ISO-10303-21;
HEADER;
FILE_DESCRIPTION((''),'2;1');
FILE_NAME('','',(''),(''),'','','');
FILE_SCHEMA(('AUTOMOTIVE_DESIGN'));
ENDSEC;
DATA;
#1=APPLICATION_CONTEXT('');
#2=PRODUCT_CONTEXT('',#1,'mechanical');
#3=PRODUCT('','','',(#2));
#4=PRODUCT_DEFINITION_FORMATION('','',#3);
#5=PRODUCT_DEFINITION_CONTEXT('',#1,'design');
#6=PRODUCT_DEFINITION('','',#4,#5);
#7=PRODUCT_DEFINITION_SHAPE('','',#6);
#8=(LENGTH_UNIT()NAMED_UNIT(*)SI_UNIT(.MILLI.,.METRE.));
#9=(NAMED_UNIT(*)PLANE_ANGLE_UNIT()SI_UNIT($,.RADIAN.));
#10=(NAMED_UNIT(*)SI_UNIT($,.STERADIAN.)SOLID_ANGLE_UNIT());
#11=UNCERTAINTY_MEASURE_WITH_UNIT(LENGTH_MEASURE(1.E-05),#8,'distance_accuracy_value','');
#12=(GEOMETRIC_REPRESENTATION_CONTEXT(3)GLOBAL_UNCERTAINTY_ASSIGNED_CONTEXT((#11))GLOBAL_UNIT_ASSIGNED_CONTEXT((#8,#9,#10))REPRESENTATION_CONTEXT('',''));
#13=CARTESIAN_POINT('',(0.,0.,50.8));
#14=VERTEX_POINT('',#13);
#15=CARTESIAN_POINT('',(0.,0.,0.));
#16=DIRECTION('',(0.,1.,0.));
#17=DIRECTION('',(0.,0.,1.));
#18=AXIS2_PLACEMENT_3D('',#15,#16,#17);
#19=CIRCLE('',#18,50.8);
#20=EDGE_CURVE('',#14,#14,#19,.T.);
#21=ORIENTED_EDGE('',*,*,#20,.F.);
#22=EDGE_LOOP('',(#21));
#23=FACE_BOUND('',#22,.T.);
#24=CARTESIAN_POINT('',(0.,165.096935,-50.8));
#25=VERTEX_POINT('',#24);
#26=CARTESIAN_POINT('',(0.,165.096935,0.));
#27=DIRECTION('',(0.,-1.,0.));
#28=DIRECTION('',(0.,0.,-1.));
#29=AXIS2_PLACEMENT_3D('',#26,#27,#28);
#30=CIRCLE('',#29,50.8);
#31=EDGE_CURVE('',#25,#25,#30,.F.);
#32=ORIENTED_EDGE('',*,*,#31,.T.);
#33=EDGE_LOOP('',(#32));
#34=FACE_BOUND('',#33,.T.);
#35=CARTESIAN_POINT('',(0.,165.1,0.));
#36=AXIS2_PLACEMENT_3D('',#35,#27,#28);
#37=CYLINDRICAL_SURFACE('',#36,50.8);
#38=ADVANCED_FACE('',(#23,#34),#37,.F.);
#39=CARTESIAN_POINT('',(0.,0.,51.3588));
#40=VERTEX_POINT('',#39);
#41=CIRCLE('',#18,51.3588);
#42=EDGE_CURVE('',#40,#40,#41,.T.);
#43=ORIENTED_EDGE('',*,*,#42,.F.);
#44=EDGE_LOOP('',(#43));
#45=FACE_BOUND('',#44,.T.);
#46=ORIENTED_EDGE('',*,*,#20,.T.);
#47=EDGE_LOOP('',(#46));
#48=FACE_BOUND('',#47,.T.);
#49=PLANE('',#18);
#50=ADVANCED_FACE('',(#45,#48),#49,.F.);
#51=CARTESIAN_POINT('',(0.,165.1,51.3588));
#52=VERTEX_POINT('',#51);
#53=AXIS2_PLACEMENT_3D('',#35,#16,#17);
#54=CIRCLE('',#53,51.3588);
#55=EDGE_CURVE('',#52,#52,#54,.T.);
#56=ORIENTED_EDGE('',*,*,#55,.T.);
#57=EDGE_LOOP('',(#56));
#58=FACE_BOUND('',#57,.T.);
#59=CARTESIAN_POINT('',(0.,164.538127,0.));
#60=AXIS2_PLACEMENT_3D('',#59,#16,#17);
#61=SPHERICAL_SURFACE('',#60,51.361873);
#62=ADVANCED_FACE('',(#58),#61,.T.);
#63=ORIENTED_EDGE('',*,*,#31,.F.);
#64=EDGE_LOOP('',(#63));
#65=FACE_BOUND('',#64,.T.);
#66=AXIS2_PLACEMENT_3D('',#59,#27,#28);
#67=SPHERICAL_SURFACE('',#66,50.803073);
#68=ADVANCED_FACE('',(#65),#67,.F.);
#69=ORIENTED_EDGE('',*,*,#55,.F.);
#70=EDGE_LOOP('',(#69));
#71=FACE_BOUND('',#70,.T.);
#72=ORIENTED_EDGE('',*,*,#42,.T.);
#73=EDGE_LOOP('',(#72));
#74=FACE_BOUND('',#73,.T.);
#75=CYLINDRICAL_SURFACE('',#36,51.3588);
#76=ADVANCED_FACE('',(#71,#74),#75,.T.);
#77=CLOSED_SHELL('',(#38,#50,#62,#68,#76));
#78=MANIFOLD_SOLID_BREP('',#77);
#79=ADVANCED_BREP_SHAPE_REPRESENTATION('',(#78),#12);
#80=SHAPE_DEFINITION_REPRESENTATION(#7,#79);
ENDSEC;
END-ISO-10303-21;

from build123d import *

# Parameters (mm, degrees)
SKETCH1_R           = 51.3588
BOSS_EXTRUDE1_DEPTH = 165.1
DOME1_FACE_RADIUS   = 51.3588
DOME1_HEIGHT        = 50.8


# Read off the part's stored shape, not the designer's step: Shell1
with BuildPart() as part:
    # Sketch1 → Boss-Extrude1 (new body)
    with BuildSketch(Plane(origin=(0, 0, 0), x_dir=(1, 0, 0), z_dir=(0, 1, 0))):
        with Locations(Location((0, 0, 0), (0, 0, 270))):
            Circle(SKETCH1_R)
    extrude(amount=BOSS_EXTRUDE1_DEPTH)

    # Dome1: a dome of height H over a round flat face of radius A is a cap of a sphere of radius (A * A + H * H) / (2 * H)
    dome1_r = (DOME1_FACE_RADIUS * DOME1_FACE_RADIUS + DOME1_HEIGHT * DOME1_HEIGHT) / (2 * DOME1_HEIGHT)
    dome1_base = Plane((0, 165.1, 0), z_dir=(0, 1, 0))
    with Locations(dome1_base.offset(DOME1_HEIGHT - dome1_r)):
        dome1_ball = Sphere(dome1_r, mode=Mode.PRIVATE)
    add(split(dome1_ball, bisect_by=dome1_base, keep=Keep.TOP, mode=Mode.PRIVATE))

    # Shell1 outline → Shell1 (revolve, cut)
    with BuildSketch(Plane.XY):
        with BuildLine():
            Line((50.8, 0), (50.800000001, 165.096935001))
            ThreePointArc((50.800000001, 165.096935001), (35.725082804, 200.65835259), (0, 215.3412))
            Line((0, 215.3412), (0, 0))
            Line((0, 0), (50.8, 0))
        make_face()
    revolve(axis=Axis((0, 0, 0), (0, 1, 0)), mode=Mode.SUBTRACT)


solid = part.part
